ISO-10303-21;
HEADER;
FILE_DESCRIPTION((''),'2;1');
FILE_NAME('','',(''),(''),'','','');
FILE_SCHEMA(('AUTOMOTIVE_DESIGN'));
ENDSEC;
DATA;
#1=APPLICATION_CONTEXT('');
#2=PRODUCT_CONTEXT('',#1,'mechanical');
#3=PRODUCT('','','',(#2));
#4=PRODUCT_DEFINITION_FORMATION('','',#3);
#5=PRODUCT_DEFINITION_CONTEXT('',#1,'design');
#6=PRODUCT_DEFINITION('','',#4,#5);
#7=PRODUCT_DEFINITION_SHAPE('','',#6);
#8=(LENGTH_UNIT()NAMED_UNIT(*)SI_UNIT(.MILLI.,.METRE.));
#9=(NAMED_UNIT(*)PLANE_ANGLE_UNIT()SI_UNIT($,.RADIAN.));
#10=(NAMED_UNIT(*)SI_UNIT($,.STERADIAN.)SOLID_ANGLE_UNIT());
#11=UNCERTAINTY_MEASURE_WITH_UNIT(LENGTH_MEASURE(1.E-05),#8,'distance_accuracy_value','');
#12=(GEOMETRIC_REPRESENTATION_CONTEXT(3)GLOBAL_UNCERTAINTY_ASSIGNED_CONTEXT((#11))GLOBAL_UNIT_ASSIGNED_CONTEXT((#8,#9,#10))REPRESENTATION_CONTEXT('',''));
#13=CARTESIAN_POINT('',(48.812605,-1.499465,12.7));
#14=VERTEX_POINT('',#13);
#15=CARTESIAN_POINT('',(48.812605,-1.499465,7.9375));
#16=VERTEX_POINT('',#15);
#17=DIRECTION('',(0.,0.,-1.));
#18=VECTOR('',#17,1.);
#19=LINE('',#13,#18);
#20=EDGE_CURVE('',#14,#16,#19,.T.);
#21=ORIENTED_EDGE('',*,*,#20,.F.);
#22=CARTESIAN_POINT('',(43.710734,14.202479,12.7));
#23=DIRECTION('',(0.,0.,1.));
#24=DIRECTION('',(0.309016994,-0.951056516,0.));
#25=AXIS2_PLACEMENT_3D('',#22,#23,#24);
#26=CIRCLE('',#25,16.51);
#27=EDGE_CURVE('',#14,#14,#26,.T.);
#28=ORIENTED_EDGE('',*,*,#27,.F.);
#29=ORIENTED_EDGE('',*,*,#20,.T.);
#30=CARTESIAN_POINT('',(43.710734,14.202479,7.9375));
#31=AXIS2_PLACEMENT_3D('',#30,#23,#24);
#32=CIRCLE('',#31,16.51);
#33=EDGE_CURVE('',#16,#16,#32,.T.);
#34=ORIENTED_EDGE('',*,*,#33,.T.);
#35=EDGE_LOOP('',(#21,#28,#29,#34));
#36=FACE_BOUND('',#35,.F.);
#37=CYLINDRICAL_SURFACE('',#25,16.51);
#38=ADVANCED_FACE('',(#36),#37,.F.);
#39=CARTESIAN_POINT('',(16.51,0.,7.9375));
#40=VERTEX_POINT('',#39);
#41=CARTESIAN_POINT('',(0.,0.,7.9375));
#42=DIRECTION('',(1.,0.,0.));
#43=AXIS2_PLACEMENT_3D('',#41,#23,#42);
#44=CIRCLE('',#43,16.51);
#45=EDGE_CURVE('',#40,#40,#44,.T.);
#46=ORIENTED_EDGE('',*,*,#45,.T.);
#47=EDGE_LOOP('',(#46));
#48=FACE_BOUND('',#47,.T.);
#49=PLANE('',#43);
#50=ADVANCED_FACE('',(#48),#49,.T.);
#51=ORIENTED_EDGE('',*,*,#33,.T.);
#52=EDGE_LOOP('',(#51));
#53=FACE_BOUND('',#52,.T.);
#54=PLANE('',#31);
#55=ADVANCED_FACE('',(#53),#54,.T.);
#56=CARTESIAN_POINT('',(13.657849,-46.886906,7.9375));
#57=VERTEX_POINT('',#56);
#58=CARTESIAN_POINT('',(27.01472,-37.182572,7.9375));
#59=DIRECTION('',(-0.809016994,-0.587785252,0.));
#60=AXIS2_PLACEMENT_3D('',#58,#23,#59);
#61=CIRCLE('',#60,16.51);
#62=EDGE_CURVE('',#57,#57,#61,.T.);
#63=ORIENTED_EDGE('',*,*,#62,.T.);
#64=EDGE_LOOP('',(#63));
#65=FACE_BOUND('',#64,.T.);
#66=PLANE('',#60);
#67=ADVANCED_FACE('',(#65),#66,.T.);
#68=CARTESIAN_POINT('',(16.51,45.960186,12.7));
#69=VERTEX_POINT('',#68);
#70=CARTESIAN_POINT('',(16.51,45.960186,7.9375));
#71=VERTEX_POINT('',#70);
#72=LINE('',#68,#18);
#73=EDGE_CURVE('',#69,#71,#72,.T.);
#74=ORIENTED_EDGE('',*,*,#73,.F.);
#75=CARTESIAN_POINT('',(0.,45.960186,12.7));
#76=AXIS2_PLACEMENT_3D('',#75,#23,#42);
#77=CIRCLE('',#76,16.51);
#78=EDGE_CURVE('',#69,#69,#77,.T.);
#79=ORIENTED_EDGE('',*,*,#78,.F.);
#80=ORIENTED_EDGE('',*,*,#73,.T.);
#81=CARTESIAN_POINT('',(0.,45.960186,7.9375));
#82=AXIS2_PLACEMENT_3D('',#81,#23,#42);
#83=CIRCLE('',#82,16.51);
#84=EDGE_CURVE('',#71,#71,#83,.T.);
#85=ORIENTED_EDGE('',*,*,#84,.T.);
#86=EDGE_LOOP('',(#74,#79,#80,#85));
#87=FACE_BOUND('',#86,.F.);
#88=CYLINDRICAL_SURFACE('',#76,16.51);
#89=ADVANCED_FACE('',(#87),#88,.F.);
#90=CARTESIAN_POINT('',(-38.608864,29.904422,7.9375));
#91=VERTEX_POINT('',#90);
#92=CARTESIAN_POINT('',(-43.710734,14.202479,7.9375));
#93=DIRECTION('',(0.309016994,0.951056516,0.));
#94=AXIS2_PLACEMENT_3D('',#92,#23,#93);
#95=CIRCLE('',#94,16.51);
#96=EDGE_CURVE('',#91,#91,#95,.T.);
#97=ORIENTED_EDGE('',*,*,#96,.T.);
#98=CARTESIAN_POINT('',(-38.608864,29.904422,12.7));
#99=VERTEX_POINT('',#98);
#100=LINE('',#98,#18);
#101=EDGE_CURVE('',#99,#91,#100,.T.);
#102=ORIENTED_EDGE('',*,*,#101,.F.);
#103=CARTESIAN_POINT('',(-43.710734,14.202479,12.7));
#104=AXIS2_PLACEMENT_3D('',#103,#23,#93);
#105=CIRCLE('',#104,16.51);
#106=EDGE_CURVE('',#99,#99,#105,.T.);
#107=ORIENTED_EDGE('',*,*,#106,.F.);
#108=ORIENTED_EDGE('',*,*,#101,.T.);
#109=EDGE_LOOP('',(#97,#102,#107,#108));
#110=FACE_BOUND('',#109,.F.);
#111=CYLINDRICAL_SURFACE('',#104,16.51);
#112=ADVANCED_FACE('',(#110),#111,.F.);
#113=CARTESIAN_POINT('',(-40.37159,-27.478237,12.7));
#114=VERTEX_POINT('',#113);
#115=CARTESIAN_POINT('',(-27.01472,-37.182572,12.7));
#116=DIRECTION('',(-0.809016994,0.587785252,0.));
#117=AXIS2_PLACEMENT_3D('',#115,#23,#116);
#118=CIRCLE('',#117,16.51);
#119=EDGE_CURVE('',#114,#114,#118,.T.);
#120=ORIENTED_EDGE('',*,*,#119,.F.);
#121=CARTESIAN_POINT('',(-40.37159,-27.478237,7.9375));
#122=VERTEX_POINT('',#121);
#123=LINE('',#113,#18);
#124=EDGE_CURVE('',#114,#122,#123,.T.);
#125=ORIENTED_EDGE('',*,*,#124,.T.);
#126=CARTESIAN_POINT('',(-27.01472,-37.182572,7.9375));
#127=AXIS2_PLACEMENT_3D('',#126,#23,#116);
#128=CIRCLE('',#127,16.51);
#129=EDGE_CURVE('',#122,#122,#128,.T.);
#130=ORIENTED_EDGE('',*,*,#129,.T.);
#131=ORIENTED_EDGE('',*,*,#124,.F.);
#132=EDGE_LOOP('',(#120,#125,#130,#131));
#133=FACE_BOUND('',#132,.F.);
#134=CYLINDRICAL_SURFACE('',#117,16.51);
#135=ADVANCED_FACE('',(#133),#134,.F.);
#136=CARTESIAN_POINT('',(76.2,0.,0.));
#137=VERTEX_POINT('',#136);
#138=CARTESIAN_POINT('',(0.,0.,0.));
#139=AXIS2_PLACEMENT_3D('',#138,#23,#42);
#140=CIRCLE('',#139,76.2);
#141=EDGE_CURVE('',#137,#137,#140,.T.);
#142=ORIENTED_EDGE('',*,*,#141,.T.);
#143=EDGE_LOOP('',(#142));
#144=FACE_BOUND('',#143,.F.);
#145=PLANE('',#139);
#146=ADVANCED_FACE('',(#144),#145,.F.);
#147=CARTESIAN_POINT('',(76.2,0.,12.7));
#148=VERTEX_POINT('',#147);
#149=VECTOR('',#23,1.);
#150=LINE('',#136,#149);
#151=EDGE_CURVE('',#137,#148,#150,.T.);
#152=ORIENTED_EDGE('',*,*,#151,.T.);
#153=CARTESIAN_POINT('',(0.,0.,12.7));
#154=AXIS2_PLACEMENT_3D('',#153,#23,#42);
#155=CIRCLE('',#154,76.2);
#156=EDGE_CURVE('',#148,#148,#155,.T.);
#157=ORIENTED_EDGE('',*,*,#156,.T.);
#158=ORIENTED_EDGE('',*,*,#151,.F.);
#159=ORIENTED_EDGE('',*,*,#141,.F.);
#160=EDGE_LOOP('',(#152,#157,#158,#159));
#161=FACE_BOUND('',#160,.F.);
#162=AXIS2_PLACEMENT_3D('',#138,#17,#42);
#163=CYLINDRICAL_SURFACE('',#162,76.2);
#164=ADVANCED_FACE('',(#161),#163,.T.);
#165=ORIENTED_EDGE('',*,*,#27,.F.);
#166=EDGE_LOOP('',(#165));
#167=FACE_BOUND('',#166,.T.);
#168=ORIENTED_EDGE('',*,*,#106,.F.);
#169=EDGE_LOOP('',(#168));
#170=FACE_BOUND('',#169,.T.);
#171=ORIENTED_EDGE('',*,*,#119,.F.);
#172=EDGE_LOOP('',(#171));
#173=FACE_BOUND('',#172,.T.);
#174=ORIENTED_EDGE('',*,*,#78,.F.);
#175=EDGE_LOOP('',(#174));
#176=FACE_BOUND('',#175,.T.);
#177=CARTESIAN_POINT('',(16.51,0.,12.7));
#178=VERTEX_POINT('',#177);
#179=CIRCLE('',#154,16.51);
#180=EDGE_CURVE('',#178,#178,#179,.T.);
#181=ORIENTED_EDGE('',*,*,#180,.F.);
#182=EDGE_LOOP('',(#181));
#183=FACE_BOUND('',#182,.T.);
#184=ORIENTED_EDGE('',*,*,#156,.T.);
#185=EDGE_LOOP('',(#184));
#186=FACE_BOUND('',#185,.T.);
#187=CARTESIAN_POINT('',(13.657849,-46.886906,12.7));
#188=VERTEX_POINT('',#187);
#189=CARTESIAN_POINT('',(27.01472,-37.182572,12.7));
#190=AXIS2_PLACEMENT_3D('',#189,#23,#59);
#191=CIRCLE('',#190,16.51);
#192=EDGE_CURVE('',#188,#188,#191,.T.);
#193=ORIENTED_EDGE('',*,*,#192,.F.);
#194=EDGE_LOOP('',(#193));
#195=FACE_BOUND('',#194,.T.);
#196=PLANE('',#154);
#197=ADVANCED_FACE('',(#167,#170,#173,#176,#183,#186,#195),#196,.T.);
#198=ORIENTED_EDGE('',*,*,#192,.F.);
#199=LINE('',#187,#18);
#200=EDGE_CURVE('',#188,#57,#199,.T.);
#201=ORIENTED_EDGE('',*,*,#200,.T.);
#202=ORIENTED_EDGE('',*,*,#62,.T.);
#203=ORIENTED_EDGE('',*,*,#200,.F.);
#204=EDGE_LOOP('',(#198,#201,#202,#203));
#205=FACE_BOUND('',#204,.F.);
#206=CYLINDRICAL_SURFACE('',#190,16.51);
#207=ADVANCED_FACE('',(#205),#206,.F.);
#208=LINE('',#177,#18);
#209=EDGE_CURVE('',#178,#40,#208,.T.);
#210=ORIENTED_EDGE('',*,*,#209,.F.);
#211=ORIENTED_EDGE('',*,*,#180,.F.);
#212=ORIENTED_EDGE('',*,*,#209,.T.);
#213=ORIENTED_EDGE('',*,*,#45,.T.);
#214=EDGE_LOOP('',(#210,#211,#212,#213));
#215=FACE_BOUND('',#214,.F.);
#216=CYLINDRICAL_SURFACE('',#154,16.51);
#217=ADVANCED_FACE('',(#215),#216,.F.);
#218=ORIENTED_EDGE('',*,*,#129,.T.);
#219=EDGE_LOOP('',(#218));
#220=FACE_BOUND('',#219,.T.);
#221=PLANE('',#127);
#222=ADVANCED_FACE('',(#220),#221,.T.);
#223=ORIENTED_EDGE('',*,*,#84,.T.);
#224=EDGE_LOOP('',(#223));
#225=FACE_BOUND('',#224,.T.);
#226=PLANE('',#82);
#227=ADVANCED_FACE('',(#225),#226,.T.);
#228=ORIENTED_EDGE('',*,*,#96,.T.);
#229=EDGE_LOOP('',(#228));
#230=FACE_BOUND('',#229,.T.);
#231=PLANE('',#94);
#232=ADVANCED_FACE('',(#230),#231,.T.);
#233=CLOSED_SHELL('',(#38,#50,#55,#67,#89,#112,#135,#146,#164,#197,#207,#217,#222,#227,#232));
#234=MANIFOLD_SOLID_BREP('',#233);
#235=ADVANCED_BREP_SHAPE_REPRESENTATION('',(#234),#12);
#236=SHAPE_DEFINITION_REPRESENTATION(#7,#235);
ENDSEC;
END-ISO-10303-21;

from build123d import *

# Parameters (mm, degrees)
F0_R            = 76.2
F1_DEPTH        = 12.7
F2_R            = 16.51
F3_DEPTH        = 4.7625
F3_COPIES_COUNT = 5
F4_R            = 16.51
F5_DEPTH        = 4.7625


# Not quite as in the source:
# - a pattern or mirror of a feature is missing from the dataset's text; its kind, count and spacing are read off the source's solid


with BuildPart() as f1:
    # F0 (on Top) → F1 (new body)
    with BuildSketch(Plane.XY):
        Circle(F0_R)
    extrude(amount=F1_DEPTH)

    # F2 (on face) → F3 (cut)
    with BuildSketch(Plane.XY.offset(12.7)):
        with Locations((0, 45.9601860202)):
            Circle(F2_R)
    f3 = extrude(amount=-F3_DEPTH, mode=Mode.SUBTRACT)

    # F3_copies: F3 ×5 about axis
    f3_copies_axis = Axis((0, 0, 0), (0, 0, 1))
    for i in range(1, F3_COPIES_COUNT):
        add(f3.rotate(f3_copies_axis, i * 360 / F3_COPIES_COUNT), mode=Mode.SUBTRACT)

    # F4 (on face) → F5 (cut)
    with BuildSketch(Plane.XY.offset(12.7)):
        Circle(F4_R)
    extrude(amount=-F5_DEPTH, mode=Mode.SUBTRACT)


solid = f1.part
